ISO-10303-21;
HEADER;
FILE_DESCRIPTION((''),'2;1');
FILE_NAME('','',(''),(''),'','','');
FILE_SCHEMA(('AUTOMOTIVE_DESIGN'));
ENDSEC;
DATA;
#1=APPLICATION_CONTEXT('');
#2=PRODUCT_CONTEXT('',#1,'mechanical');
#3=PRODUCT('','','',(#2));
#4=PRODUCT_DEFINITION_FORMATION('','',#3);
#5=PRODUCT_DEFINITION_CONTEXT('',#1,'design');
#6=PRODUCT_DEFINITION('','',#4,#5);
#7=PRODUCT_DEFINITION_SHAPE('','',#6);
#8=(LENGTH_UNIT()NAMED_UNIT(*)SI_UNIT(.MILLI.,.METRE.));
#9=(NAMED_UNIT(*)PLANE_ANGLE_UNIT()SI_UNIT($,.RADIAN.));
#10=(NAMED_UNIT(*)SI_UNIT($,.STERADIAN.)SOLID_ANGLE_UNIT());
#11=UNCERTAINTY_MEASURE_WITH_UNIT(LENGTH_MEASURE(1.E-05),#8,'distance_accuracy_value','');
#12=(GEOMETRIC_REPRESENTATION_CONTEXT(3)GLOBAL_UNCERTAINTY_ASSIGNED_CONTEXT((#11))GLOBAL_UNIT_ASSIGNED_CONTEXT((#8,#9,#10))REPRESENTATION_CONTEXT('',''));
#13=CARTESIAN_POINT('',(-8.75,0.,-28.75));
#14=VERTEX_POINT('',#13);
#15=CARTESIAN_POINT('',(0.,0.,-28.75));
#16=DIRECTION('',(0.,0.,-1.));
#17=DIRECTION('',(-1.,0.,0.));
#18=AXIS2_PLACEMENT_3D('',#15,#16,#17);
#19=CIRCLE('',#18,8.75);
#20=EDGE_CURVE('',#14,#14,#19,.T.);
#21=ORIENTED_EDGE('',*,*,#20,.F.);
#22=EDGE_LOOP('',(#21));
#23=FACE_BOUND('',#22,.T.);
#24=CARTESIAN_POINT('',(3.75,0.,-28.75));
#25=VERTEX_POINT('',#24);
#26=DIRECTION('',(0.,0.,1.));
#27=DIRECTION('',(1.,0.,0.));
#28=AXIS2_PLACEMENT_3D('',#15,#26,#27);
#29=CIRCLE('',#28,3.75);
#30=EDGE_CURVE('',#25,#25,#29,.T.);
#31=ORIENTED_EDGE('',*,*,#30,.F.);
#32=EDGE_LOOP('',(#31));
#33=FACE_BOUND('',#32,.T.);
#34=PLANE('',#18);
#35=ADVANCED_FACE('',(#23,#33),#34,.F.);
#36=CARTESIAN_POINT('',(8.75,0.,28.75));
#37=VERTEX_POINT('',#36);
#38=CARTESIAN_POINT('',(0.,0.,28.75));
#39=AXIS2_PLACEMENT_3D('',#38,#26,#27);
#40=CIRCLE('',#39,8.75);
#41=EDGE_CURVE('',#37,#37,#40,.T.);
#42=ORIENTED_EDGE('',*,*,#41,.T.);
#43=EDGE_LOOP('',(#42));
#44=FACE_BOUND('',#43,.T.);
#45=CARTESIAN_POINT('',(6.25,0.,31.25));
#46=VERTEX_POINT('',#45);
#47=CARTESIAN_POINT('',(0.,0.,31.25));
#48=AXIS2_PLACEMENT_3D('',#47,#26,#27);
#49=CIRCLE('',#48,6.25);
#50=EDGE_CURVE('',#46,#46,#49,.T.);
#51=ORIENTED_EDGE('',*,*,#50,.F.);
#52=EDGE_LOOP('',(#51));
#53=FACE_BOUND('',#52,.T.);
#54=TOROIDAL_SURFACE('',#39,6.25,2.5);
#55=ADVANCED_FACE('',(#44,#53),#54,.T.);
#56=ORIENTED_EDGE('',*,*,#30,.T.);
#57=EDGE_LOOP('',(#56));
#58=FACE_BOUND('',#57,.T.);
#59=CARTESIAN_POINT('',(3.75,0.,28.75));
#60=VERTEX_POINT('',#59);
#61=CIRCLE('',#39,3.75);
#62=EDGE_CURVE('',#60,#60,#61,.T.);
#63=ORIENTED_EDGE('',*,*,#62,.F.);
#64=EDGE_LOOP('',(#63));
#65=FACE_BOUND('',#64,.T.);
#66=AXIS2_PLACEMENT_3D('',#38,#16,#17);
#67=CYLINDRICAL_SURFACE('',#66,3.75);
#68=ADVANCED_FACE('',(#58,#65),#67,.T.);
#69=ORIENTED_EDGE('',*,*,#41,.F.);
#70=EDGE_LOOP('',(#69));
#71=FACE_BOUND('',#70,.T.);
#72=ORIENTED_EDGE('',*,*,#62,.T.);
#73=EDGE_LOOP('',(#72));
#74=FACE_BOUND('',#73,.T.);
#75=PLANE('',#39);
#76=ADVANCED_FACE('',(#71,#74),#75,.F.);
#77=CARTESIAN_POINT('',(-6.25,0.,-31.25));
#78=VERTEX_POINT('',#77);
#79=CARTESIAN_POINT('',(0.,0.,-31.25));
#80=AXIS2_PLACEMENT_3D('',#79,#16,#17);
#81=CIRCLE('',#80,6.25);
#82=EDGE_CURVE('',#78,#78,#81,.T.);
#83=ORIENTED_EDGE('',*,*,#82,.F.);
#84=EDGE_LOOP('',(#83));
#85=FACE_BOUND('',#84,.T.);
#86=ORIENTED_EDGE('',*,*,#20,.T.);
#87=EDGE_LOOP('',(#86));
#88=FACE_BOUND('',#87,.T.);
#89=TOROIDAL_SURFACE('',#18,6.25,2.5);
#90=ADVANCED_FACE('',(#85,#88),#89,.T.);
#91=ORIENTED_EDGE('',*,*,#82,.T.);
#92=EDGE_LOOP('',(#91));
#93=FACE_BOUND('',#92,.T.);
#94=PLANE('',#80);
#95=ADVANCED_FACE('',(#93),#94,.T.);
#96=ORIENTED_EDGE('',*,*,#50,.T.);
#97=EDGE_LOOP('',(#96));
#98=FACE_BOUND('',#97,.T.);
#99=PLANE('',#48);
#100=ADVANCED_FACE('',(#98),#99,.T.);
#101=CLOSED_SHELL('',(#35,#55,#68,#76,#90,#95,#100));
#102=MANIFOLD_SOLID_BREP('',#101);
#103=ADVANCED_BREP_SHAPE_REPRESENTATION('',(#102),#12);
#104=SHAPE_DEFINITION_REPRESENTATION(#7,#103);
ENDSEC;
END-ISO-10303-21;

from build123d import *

# Parameters (mm, degrees)
SKETCH1_R           = 3.75
BOSS_EXTRUDE1_DEPTH = 28.75
BOSS_EXTRUDE2_START = 2.5
SKETCH2_R           = 8.75
SKETCH2_R_2         = 3.75
BOSS_EXTRUDE2_DEPTH = 2.5
SKETCH3_R           = 8.75
BOSS_EXTRUDE3_DEPTH = 2.5
FILLET1_R           = 2.5


with BuildPart() as part:
    # Sketch1 → Boss-Extrude1 (new, symmetric)
    with BuildSketch(Plane.XY):
        Circle(SKETCH1_R)
    extrude(amount=BOSS_EXTRUDE1_DEPTH, both=True)

    # Sketch2 → Boss-Extrude2 (add)
    # profile 1 of 2: a face of its own
    with BuildSketch(Plane.XY.offset(28.75).offset(BOSS_EXTRUDE2_START)):
        Circle(SKETCH2_R)
        Circle(SKETCH2_R_2, mode=Mode.SUBTRACT)
    # profile 2 of 2: a face of its own
    with BuildSketch(Plane.XY.offset(28.75).offset(BOSS_EXTRUDE2_START)):
        Circle(SKETCH2_R_2)
    extrude(amount=-BOSS_EXTRUDE2_DEPTH)

    # Sketch3 → Boss-Extrude3 (add)
    with BuildSketch(Plane(origin=(0, 0, -28.75), x_dir=(-1, 0, 0), z_dir=(0, 0, -1))):
        with Locations(Location((0, 0, 0), (0, 0, 180))):
            Circle(SKETCH3_R)
    extrude(amount=BOSS_EXTRUDE3_DEPTH)

    # Fillet1
    fillet1_edges = [part.edges().sort_by_distance(p)[0] for p in [
        (-8.75, 0, -31.25),
        (-8.75, 0, 31.25),
    ]]
    fillet(fillet1_edges, radius=FILLET1_R - 0.0001)  # a hair under: the kernel refuses the full size


solid = part.part
